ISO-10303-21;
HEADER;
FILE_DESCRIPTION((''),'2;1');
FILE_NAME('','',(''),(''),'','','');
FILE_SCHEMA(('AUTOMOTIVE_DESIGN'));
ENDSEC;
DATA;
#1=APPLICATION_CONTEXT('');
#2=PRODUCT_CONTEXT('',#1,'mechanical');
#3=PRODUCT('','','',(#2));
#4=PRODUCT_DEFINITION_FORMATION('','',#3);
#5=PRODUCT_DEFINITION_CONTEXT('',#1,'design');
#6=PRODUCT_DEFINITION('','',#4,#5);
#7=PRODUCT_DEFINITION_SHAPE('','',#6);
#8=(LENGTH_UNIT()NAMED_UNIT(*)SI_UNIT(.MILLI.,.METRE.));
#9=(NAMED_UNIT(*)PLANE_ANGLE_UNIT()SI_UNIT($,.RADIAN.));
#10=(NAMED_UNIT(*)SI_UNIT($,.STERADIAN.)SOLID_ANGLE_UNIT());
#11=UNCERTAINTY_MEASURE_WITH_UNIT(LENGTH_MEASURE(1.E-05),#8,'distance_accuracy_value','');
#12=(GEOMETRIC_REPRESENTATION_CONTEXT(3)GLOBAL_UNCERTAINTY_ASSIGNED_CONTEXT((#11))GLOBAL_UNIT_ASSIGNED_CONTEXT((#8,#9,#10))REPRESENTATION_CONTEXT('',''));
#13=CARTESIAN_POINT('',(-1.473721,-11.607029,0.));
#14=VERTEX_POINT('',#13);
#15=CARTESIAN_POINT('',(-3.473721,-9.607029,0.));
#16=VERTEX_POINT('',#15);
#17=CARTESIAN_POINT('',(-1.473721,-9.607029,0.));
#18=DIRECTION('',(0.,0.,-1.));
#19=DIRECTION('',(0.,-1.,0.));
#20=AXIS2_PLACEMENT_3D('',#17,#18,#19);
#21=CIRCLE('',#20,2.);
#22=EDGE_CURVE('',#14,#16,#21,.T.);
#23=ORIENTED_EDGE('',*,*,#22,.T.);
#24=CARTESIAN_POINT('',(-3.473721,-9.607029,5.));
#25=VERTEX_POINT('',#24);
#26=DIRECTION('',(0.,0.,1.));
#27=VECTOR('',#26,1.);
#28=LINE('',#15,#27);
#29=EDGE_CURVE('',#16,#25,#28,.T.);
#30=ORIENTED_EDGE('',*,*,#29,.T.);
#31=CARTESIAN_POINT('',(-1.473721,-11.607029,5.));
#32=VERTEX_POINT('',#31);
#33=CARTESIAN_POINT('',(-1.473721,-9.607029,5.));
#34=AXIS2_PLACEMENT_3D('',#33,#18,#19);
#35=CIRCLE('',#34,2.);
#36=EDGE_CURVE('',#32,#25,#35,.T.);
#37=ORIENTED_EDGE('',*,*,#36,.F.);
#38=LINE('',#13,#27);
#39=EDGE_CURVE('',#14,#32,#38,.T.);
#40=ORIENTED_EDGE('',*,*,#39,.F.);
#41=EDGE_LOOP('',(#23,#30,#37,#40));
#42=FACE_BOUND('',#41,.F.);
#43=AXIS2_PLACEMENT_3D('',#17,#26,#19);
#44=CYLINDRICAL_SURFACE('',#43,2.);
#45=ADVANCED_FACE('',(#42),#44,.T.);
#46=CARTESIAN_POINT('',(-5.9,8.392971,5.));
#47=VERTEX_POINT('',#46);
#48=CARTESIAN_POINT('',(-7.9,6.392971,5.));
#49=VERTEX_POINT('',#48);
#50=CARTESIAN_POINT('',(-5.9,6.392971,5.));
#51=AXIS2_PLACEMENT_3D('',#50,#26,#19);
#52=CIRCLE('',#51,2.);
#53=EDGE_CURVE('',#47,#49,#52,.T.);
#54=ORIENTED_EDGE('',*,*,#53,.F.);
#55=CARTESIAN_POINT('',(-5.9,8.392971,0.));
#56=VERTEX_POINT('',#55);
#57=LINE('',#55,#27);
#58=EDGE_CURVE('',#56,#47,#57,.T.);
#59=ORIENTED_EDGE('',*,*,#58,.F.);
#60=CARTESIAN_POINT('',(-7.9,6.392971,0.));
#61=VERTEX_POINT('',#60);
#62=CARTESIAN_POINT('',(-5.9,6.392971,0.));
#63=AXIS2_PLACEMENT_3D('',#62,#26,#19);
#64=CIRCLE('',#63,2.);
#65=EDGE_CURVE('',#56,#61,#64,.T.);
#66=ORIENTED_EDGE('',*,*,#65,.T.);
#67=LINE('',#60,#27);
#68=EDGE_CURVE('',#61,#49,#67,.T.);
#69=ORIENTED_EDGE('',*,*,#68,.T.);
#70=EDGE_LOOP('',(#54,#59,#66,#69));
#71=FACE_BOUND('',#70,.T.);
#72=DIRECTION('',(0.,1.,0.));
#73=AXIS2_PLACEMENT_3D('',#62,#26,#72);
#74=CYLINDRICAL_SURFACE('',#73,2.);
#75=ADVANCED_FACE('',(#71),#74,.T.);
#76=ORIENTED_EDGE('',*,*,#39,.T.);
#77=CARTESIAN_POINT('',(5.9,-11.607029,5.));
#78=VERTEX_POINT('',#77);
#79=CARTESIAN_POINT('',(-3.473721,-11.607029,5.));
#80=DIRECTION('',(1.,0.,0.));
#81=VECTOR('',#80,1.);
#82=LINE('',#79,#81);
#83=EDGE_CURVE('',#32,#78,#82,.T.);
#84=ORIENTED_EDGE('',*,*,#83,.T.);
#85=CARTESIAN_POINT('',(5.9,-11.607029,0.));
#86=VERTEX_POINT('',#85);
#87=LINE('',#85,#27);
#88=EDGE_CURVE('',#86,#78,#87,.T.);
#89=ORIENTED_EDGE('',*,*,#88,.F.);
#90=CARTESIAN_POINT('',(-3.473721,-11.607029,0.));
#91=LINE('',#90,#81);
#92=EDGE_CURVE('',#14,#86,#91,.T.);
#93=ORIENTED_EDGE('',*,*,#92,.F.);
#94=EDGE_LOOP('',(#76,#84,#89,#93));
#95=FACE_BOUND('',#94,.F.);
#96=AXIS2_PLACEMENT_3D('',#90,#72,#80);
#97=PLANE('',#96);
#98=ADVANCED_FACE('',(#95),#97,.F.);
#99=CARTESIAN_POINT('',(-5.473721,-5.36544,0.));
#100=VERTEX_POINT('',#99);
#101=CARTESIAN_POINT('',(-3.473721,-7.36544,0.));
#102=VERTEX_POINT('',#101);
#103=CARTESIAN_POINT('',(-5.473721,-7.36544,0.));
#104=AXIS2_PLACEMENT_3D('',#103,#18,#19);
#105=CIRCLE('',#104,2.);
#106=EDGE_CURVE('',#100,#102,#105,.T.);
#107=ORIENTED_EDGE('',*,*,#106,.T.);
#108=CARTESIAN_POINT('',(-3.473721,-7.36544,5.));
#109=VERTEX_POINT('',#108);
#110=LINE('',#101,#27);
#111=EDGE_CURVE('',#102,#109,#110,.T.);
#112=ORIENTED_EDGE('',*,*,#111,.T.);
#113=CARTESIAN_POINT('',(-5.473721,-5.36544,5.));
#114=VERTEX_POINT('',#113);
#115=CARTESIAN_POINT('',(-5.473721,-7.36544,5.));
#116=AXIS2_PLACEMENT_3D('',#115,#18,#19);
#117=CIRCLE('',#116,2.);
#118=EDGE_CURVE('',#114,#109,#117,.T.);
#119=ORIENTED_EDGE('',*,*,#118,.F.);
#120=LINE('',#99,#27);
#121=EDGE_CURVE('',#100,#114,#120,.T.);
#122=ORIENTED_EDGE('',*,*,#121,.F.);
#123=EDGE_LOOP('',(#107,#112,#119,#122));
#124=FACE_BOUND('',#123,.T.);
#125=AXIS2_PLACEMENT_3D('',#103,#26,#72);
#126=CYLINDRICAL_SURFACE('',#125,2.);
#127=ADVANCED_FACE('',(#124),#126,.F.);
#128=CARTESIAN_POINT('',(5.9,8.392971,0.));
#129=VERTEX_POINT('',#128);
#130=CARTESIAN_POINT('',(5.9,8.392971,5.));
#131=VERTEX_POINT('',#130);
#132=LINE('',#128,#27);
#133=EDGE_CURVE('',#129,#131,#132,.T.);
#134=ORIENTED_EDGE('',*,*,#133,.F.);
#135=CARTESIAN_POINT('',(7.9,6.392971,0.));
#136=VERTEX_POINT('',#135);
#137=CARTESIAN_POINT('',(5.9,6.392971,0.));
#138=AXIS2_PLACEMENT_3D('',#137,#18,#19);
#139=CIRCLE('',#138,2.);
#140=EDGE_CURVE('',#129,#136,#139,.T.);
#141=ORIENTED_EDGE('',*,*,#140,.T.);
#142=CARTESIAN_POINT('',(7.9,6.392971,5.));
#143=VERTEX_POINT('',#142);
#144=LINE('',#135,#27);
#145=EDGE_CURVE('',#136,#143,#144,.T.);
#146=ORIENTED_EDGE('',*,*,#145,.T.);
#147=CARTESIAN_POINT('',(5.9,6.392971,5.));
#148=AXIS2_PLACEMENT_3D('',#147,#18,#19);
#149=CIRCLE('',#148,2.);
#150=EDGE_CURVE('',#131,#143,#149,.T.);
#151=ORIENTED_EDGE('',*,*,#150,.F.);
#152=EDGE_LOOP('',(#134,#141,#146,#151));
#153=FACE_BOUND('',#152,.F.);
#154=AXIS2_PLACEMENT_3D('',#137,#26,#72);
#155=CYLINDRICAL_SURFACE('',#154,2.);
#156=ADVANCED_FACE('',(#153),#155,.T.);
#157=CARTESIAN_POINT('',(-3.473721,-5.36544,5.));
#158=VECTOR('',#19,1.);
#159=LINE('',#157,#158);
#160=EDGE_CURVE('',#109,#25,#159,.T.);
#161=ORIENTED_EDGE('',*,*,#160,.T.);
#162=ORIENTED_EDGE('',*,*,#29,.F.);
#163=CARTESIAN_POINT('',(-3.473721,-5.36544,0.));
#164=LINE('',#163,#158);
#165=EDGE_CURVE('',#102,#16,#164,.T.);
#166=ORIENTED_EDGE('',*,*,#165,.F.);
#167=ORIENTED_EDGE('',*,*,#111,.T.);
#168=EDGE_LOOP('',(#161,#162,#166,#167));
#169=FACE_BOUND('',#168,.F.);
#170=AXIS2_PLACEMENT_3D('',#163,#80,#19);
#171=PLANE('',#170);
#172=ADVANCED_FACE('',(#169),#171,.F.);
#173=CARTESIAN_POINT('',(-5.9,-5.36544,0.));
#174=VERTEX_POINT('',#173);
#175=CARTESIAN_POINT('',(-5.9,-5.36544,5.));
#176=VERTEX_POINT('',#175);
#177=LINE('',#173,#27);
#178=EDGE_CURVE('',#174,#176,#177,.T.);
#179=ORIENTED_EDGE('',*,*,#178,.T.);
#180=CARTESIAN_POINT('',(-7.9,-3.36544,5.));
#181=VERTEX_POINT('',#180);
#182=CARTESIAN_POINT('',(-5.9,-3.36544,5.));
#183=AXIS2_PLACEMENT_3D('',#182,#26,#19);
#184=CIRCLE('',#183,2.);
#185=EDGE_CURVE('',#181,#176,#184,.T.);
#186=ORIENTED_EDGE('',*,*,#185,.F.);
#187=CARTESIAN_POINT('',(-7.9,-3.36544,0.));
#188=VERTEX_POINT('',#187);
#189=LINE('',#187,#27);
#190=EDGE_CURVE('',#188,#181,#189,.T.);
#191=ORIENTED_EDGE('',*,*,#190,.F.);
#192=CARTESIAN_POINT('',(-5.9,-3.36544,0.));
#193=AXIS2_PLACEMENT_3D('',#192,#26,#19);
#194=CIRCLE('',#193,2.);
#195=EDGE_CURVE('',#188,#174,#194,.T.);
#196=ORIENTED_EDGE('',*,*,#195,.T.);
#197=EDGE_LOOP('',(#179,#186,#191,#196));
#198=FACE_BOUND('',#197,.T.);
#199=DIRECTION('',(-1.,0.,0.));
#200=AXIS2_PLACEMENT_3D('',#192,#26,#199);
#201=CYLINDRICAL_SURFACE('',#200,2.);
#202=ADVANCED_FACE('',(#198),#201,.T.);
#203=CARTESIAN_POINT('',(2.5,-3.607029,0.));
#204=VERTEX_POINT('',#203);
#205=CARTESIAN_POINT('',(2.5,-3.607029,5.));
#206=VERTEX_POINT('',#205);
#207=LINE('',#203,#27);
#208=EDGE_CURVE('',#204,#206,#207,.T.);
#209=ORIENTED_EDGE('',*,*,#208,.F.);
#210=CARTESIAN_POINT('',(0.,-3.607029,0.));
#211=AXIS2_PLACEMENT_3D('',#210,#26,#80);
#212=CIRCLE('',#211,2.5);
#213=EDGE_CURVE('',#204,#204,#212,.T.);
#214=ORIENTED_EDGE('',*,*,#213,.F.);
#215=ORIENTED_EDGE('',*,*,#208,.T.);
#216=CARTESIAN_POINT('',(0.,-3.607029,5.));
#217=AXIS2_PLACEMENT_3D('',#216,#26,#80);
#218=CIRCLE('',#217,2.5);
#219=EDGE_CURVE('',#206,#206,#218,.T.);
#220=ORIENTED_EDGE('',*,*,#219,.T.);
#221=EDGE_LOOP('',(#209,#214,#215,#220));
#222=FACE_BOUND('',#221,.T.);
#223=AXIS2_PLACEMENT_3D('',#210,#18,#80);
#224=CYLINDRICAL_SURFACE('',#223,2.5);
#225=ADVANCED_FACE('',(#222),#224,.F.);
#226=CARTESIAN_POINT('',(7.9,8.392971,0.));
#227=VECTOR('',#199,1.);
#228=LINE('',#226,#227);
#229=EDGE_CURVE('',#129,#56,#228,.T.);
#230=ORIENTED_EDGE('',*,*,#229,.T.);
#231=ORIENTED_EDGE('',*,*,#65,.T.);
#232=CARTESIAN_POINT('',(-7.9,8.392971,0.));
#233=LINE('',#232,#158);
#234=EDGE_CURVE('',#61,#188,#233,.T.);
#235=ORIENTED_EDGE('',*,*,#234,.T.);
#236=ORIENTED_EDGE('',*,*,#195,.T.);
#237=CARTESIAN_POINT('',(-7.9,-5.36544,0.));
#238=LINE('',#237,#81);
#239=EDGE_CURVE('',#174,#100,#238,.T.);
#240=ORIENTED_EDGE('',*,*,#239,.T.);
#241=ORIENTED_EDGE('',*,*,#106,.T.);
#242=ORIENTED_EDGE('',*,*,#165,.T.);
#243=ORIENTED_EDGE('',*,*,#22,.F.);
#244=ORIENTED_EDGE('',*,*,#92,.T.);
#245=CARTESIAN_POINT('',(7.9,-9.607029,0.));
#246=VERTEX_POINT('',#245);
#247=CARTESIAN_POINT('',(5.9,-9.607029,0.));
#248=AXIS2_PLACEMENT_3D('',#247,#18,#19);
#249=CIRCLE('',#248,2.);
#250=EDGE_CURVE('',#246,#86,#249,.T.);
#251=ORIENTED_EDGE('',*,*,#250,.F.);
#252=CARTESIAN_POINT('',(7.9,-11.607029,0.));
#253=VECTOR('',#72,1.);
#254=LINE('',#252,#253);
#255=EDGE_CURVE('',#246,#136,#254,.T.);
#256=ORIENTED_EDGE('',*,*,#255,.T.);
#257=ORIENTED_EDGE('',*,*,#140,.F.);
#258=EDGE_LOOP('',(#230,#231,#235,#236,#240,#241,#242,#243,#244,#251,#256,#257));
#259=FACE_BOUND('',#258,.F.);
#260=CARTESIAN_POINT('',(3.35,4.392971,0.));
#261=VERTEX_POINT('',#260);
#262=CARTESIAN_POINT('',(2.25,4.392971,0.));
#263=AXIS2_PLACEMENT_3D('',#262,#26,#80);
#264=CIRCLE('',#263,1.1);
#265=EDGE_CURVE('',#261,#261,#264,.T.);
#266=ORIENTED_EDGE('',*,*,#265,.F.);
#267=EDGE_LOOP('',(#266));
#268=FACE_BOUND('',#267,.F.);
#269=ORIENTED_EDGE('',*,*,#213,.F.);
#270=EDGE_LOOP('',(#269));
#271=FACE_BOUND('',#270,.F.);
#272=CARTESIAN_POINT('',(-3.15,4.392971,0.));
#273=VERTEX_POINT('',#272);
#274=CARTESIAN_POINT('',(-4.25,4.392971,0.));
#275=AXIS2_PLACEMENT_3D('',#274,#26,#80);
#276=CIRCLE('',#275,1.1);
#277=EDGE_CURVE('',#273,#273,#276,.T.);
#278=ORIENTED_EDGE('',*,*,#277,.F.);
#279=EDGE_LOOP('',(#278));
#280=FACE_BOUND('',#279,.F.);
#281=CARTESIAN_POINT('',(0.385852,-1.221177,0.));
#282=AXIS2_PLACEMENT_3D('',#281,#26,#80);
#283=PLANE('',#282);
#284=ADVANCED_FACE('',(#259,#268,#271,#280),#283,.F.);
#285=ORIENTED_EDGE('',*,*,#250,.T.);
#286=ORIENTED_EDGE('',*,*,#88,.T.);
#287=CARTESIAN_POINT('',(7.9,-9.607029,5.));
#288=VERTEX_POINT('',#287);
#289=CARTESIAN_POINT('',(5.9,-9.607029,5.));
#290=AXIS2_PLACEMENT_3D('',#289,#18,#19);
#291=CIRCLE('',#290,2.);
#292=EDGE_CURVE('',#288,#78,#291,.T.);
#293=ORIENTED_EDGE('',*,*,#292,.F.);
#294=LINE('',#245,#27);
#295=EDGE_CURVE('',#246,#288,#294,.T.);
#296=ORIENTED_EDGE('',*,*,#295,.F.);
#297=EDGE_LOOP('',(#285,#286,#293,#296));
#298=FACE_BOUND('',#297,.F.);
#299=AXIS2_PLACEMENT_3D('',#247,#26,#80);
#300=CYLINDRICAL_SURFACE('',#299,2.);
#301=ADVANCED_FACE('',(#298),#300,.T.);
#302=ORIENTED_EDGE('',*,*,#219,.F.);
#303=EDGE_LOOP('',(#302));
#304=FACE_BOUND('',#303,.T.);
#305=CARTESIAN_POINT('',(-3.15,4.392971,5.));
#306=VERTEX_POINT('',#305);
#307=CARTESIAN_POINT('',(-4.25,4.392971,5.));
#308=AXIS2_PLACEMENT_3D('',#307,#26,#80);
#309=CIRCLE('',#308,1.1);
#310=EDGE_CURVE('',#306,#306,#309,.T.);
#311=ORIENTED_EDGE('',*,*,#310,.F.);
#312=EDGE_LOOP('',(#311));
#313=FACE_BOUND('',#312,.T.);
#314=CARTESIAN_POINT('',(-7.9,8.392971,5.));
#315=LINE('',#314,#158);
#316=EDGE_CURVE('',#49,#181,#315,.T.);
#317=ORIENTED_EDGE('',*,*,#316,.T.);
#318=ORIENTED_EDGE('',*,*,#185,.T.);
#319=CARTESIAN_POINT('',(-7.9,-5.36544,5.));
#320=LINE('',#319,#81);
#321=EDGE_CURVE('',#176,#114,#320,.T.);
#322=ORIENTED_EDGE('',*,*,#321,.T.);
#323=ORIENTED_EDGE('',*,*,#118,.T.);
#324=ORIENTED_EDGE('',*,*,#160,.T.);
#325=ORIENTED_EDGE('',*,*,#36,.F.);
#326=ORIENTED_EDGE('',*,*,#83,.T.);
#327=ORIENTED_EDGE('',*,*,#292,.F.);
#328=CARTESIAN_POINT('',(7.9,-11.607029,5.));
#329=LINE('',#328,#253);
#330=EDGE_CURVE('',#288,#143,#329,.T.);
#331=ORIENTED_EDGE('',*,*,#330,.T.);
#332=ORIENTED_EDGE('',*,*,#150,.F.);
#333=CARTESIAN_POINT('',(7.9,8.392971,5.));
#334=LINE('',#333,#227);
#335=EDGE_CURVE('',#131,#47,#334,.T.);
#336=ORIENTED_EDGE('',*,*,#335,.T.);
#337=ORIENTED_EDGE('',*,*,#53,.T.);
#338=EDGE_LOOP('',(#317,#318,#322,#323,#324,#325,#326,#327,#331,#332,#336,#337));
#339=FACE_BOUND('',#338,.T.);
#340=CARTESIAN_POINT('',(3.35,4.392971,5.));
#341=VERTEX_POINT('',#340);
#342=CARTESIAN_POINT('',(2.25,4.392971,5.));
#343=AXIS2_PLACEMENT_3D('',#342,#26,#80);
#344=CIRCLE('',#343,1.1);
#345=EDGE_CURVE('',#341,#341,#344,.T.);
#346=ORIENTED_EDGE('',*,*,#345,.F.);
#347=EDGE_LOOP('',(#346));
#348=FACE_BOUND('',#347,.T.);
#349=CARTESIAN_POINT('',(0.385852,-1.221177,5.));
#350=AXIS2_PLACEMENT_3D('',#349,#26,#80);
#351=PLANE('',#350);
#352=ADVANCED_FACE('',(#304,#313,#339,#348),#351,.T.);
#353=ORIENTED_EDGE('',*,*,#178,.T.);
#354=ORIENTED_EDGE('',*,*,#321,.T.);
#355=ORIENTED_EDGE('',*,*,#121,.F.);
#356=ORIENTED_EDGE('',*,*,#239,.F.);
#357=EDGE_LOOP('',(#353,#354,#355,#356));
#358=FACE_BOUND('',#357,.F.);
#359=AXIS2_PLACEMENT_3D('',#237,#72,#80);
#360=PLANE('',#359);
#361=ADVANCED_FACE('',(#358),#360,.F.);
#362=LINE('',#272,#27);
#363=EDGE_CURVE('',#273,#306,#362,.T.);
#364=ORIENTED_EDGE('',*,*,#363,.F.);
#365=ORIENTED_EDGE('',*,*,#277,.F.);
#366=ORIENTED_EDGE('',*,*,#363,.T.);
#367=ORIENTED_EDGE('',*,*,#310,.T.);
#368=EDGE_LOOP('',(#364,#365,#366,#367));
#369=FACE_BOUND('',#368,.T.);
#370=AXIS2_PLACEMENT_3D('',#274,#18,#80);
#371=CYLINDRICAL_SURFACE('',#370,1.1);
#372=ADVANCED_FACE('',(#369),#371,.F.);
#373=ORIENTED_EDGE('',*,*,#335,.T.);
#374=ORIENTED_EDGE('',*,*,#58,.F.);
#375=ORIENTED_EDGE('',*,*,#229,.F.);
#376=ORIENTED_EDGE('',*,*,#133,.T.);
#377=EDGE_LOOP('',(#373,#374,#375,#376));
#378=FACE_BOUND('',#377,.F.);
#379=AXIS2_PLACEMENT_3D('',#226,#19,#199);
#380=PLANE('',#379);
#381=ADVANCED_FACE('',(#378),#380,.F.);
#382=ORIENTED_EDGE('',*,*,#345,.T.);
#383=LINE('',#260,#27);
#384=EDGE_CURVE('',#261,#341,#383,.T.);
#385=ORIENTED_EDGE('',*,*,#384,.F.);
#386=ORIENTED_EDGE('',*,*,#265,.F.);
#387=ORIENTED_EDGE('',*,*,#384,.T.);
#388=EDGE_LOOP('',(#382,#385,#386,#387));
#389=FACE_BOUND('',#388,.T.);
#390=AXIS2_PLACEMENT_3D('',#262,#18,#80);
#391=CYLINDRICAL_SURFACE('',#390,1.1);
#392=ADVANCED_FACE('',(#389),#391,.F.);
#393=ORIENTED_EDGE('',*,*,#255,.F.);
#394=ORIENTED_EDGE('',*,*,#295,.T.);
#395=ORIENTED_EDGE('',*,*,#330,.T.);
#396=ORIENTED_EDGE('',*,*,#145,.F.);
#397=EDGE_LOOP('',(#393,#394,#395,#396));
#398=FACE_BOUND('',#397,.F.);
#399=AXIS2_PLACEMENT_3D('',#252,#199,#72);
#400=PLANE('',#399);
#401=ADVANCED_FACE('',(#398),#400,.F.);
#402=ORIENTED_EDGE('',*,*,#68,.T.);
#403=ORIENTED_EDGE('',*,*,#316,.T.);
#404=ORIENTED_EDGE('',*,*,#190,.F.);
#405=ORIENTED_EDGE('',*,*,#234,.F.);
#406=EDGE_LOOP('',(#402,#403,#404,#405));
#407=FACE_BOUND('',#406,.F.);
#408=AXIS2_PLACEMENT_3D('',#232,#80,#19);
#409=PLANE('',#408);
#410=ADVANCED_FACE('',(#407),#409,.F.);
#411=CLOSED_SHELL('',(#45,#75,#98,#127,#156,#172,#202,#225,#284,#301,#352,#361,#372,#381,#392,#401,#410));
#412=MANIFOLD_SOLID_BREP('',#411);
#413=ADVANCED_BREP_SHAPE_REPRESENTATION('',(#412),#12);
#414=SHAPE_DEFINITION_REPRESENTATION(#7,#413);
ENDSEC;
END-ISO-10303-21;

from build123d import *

# Parameters (mm, degrees)
F0_R     = 2.5
F0_R_2   = 1.1
F1_DEPTH = 5
F2_R     = 2


with BuildPart() as f1:
    # F0 (on Top) → F1 (new body)
    with BuildSketch(Plane.XY):
        Polygon((7.9, 8.3929710358), (0, 8.3929710358), (-7.9, 8.3929710358), (-7.9, -5.3654396906), (-3.4737212118, -5.3654396906), (-3.4737212118, -11.6070289642), (0, -11.6070289642), (7.9, -11.6070289642), align=None)
        with Locations((0, -3.6070289642)):
            Circle(F0_R, mode=Mode.SUBTRACT)
        with Locations((-4.25, 4.3929710358)):
            Circle(F0_R_2, mode=Mode.SUBTRACT)
        with Locations((2.25, 4.3929710358)):
            Circle(F0_R_2, mode=Mode.SUBTRACT)
    extrude(amount=F1_DEPTH)

    # F2
    f2_edges = [f1.edges().sort_by_distance(p)[0] for p in [
        (7.9, -11.607029, 2.5),
        (7.9, 8.392971, 2.5),
        (-3.473721, -11.607029, 2.5),
        (-7.9, 8.392971, 2.5),
        (-7.9, -5.36544, 2.5),
        (-3.473721, -5.36544, 2.5),
    ]]
    fillet(f2_edges, radius=F2_R)


solid = f1.part
